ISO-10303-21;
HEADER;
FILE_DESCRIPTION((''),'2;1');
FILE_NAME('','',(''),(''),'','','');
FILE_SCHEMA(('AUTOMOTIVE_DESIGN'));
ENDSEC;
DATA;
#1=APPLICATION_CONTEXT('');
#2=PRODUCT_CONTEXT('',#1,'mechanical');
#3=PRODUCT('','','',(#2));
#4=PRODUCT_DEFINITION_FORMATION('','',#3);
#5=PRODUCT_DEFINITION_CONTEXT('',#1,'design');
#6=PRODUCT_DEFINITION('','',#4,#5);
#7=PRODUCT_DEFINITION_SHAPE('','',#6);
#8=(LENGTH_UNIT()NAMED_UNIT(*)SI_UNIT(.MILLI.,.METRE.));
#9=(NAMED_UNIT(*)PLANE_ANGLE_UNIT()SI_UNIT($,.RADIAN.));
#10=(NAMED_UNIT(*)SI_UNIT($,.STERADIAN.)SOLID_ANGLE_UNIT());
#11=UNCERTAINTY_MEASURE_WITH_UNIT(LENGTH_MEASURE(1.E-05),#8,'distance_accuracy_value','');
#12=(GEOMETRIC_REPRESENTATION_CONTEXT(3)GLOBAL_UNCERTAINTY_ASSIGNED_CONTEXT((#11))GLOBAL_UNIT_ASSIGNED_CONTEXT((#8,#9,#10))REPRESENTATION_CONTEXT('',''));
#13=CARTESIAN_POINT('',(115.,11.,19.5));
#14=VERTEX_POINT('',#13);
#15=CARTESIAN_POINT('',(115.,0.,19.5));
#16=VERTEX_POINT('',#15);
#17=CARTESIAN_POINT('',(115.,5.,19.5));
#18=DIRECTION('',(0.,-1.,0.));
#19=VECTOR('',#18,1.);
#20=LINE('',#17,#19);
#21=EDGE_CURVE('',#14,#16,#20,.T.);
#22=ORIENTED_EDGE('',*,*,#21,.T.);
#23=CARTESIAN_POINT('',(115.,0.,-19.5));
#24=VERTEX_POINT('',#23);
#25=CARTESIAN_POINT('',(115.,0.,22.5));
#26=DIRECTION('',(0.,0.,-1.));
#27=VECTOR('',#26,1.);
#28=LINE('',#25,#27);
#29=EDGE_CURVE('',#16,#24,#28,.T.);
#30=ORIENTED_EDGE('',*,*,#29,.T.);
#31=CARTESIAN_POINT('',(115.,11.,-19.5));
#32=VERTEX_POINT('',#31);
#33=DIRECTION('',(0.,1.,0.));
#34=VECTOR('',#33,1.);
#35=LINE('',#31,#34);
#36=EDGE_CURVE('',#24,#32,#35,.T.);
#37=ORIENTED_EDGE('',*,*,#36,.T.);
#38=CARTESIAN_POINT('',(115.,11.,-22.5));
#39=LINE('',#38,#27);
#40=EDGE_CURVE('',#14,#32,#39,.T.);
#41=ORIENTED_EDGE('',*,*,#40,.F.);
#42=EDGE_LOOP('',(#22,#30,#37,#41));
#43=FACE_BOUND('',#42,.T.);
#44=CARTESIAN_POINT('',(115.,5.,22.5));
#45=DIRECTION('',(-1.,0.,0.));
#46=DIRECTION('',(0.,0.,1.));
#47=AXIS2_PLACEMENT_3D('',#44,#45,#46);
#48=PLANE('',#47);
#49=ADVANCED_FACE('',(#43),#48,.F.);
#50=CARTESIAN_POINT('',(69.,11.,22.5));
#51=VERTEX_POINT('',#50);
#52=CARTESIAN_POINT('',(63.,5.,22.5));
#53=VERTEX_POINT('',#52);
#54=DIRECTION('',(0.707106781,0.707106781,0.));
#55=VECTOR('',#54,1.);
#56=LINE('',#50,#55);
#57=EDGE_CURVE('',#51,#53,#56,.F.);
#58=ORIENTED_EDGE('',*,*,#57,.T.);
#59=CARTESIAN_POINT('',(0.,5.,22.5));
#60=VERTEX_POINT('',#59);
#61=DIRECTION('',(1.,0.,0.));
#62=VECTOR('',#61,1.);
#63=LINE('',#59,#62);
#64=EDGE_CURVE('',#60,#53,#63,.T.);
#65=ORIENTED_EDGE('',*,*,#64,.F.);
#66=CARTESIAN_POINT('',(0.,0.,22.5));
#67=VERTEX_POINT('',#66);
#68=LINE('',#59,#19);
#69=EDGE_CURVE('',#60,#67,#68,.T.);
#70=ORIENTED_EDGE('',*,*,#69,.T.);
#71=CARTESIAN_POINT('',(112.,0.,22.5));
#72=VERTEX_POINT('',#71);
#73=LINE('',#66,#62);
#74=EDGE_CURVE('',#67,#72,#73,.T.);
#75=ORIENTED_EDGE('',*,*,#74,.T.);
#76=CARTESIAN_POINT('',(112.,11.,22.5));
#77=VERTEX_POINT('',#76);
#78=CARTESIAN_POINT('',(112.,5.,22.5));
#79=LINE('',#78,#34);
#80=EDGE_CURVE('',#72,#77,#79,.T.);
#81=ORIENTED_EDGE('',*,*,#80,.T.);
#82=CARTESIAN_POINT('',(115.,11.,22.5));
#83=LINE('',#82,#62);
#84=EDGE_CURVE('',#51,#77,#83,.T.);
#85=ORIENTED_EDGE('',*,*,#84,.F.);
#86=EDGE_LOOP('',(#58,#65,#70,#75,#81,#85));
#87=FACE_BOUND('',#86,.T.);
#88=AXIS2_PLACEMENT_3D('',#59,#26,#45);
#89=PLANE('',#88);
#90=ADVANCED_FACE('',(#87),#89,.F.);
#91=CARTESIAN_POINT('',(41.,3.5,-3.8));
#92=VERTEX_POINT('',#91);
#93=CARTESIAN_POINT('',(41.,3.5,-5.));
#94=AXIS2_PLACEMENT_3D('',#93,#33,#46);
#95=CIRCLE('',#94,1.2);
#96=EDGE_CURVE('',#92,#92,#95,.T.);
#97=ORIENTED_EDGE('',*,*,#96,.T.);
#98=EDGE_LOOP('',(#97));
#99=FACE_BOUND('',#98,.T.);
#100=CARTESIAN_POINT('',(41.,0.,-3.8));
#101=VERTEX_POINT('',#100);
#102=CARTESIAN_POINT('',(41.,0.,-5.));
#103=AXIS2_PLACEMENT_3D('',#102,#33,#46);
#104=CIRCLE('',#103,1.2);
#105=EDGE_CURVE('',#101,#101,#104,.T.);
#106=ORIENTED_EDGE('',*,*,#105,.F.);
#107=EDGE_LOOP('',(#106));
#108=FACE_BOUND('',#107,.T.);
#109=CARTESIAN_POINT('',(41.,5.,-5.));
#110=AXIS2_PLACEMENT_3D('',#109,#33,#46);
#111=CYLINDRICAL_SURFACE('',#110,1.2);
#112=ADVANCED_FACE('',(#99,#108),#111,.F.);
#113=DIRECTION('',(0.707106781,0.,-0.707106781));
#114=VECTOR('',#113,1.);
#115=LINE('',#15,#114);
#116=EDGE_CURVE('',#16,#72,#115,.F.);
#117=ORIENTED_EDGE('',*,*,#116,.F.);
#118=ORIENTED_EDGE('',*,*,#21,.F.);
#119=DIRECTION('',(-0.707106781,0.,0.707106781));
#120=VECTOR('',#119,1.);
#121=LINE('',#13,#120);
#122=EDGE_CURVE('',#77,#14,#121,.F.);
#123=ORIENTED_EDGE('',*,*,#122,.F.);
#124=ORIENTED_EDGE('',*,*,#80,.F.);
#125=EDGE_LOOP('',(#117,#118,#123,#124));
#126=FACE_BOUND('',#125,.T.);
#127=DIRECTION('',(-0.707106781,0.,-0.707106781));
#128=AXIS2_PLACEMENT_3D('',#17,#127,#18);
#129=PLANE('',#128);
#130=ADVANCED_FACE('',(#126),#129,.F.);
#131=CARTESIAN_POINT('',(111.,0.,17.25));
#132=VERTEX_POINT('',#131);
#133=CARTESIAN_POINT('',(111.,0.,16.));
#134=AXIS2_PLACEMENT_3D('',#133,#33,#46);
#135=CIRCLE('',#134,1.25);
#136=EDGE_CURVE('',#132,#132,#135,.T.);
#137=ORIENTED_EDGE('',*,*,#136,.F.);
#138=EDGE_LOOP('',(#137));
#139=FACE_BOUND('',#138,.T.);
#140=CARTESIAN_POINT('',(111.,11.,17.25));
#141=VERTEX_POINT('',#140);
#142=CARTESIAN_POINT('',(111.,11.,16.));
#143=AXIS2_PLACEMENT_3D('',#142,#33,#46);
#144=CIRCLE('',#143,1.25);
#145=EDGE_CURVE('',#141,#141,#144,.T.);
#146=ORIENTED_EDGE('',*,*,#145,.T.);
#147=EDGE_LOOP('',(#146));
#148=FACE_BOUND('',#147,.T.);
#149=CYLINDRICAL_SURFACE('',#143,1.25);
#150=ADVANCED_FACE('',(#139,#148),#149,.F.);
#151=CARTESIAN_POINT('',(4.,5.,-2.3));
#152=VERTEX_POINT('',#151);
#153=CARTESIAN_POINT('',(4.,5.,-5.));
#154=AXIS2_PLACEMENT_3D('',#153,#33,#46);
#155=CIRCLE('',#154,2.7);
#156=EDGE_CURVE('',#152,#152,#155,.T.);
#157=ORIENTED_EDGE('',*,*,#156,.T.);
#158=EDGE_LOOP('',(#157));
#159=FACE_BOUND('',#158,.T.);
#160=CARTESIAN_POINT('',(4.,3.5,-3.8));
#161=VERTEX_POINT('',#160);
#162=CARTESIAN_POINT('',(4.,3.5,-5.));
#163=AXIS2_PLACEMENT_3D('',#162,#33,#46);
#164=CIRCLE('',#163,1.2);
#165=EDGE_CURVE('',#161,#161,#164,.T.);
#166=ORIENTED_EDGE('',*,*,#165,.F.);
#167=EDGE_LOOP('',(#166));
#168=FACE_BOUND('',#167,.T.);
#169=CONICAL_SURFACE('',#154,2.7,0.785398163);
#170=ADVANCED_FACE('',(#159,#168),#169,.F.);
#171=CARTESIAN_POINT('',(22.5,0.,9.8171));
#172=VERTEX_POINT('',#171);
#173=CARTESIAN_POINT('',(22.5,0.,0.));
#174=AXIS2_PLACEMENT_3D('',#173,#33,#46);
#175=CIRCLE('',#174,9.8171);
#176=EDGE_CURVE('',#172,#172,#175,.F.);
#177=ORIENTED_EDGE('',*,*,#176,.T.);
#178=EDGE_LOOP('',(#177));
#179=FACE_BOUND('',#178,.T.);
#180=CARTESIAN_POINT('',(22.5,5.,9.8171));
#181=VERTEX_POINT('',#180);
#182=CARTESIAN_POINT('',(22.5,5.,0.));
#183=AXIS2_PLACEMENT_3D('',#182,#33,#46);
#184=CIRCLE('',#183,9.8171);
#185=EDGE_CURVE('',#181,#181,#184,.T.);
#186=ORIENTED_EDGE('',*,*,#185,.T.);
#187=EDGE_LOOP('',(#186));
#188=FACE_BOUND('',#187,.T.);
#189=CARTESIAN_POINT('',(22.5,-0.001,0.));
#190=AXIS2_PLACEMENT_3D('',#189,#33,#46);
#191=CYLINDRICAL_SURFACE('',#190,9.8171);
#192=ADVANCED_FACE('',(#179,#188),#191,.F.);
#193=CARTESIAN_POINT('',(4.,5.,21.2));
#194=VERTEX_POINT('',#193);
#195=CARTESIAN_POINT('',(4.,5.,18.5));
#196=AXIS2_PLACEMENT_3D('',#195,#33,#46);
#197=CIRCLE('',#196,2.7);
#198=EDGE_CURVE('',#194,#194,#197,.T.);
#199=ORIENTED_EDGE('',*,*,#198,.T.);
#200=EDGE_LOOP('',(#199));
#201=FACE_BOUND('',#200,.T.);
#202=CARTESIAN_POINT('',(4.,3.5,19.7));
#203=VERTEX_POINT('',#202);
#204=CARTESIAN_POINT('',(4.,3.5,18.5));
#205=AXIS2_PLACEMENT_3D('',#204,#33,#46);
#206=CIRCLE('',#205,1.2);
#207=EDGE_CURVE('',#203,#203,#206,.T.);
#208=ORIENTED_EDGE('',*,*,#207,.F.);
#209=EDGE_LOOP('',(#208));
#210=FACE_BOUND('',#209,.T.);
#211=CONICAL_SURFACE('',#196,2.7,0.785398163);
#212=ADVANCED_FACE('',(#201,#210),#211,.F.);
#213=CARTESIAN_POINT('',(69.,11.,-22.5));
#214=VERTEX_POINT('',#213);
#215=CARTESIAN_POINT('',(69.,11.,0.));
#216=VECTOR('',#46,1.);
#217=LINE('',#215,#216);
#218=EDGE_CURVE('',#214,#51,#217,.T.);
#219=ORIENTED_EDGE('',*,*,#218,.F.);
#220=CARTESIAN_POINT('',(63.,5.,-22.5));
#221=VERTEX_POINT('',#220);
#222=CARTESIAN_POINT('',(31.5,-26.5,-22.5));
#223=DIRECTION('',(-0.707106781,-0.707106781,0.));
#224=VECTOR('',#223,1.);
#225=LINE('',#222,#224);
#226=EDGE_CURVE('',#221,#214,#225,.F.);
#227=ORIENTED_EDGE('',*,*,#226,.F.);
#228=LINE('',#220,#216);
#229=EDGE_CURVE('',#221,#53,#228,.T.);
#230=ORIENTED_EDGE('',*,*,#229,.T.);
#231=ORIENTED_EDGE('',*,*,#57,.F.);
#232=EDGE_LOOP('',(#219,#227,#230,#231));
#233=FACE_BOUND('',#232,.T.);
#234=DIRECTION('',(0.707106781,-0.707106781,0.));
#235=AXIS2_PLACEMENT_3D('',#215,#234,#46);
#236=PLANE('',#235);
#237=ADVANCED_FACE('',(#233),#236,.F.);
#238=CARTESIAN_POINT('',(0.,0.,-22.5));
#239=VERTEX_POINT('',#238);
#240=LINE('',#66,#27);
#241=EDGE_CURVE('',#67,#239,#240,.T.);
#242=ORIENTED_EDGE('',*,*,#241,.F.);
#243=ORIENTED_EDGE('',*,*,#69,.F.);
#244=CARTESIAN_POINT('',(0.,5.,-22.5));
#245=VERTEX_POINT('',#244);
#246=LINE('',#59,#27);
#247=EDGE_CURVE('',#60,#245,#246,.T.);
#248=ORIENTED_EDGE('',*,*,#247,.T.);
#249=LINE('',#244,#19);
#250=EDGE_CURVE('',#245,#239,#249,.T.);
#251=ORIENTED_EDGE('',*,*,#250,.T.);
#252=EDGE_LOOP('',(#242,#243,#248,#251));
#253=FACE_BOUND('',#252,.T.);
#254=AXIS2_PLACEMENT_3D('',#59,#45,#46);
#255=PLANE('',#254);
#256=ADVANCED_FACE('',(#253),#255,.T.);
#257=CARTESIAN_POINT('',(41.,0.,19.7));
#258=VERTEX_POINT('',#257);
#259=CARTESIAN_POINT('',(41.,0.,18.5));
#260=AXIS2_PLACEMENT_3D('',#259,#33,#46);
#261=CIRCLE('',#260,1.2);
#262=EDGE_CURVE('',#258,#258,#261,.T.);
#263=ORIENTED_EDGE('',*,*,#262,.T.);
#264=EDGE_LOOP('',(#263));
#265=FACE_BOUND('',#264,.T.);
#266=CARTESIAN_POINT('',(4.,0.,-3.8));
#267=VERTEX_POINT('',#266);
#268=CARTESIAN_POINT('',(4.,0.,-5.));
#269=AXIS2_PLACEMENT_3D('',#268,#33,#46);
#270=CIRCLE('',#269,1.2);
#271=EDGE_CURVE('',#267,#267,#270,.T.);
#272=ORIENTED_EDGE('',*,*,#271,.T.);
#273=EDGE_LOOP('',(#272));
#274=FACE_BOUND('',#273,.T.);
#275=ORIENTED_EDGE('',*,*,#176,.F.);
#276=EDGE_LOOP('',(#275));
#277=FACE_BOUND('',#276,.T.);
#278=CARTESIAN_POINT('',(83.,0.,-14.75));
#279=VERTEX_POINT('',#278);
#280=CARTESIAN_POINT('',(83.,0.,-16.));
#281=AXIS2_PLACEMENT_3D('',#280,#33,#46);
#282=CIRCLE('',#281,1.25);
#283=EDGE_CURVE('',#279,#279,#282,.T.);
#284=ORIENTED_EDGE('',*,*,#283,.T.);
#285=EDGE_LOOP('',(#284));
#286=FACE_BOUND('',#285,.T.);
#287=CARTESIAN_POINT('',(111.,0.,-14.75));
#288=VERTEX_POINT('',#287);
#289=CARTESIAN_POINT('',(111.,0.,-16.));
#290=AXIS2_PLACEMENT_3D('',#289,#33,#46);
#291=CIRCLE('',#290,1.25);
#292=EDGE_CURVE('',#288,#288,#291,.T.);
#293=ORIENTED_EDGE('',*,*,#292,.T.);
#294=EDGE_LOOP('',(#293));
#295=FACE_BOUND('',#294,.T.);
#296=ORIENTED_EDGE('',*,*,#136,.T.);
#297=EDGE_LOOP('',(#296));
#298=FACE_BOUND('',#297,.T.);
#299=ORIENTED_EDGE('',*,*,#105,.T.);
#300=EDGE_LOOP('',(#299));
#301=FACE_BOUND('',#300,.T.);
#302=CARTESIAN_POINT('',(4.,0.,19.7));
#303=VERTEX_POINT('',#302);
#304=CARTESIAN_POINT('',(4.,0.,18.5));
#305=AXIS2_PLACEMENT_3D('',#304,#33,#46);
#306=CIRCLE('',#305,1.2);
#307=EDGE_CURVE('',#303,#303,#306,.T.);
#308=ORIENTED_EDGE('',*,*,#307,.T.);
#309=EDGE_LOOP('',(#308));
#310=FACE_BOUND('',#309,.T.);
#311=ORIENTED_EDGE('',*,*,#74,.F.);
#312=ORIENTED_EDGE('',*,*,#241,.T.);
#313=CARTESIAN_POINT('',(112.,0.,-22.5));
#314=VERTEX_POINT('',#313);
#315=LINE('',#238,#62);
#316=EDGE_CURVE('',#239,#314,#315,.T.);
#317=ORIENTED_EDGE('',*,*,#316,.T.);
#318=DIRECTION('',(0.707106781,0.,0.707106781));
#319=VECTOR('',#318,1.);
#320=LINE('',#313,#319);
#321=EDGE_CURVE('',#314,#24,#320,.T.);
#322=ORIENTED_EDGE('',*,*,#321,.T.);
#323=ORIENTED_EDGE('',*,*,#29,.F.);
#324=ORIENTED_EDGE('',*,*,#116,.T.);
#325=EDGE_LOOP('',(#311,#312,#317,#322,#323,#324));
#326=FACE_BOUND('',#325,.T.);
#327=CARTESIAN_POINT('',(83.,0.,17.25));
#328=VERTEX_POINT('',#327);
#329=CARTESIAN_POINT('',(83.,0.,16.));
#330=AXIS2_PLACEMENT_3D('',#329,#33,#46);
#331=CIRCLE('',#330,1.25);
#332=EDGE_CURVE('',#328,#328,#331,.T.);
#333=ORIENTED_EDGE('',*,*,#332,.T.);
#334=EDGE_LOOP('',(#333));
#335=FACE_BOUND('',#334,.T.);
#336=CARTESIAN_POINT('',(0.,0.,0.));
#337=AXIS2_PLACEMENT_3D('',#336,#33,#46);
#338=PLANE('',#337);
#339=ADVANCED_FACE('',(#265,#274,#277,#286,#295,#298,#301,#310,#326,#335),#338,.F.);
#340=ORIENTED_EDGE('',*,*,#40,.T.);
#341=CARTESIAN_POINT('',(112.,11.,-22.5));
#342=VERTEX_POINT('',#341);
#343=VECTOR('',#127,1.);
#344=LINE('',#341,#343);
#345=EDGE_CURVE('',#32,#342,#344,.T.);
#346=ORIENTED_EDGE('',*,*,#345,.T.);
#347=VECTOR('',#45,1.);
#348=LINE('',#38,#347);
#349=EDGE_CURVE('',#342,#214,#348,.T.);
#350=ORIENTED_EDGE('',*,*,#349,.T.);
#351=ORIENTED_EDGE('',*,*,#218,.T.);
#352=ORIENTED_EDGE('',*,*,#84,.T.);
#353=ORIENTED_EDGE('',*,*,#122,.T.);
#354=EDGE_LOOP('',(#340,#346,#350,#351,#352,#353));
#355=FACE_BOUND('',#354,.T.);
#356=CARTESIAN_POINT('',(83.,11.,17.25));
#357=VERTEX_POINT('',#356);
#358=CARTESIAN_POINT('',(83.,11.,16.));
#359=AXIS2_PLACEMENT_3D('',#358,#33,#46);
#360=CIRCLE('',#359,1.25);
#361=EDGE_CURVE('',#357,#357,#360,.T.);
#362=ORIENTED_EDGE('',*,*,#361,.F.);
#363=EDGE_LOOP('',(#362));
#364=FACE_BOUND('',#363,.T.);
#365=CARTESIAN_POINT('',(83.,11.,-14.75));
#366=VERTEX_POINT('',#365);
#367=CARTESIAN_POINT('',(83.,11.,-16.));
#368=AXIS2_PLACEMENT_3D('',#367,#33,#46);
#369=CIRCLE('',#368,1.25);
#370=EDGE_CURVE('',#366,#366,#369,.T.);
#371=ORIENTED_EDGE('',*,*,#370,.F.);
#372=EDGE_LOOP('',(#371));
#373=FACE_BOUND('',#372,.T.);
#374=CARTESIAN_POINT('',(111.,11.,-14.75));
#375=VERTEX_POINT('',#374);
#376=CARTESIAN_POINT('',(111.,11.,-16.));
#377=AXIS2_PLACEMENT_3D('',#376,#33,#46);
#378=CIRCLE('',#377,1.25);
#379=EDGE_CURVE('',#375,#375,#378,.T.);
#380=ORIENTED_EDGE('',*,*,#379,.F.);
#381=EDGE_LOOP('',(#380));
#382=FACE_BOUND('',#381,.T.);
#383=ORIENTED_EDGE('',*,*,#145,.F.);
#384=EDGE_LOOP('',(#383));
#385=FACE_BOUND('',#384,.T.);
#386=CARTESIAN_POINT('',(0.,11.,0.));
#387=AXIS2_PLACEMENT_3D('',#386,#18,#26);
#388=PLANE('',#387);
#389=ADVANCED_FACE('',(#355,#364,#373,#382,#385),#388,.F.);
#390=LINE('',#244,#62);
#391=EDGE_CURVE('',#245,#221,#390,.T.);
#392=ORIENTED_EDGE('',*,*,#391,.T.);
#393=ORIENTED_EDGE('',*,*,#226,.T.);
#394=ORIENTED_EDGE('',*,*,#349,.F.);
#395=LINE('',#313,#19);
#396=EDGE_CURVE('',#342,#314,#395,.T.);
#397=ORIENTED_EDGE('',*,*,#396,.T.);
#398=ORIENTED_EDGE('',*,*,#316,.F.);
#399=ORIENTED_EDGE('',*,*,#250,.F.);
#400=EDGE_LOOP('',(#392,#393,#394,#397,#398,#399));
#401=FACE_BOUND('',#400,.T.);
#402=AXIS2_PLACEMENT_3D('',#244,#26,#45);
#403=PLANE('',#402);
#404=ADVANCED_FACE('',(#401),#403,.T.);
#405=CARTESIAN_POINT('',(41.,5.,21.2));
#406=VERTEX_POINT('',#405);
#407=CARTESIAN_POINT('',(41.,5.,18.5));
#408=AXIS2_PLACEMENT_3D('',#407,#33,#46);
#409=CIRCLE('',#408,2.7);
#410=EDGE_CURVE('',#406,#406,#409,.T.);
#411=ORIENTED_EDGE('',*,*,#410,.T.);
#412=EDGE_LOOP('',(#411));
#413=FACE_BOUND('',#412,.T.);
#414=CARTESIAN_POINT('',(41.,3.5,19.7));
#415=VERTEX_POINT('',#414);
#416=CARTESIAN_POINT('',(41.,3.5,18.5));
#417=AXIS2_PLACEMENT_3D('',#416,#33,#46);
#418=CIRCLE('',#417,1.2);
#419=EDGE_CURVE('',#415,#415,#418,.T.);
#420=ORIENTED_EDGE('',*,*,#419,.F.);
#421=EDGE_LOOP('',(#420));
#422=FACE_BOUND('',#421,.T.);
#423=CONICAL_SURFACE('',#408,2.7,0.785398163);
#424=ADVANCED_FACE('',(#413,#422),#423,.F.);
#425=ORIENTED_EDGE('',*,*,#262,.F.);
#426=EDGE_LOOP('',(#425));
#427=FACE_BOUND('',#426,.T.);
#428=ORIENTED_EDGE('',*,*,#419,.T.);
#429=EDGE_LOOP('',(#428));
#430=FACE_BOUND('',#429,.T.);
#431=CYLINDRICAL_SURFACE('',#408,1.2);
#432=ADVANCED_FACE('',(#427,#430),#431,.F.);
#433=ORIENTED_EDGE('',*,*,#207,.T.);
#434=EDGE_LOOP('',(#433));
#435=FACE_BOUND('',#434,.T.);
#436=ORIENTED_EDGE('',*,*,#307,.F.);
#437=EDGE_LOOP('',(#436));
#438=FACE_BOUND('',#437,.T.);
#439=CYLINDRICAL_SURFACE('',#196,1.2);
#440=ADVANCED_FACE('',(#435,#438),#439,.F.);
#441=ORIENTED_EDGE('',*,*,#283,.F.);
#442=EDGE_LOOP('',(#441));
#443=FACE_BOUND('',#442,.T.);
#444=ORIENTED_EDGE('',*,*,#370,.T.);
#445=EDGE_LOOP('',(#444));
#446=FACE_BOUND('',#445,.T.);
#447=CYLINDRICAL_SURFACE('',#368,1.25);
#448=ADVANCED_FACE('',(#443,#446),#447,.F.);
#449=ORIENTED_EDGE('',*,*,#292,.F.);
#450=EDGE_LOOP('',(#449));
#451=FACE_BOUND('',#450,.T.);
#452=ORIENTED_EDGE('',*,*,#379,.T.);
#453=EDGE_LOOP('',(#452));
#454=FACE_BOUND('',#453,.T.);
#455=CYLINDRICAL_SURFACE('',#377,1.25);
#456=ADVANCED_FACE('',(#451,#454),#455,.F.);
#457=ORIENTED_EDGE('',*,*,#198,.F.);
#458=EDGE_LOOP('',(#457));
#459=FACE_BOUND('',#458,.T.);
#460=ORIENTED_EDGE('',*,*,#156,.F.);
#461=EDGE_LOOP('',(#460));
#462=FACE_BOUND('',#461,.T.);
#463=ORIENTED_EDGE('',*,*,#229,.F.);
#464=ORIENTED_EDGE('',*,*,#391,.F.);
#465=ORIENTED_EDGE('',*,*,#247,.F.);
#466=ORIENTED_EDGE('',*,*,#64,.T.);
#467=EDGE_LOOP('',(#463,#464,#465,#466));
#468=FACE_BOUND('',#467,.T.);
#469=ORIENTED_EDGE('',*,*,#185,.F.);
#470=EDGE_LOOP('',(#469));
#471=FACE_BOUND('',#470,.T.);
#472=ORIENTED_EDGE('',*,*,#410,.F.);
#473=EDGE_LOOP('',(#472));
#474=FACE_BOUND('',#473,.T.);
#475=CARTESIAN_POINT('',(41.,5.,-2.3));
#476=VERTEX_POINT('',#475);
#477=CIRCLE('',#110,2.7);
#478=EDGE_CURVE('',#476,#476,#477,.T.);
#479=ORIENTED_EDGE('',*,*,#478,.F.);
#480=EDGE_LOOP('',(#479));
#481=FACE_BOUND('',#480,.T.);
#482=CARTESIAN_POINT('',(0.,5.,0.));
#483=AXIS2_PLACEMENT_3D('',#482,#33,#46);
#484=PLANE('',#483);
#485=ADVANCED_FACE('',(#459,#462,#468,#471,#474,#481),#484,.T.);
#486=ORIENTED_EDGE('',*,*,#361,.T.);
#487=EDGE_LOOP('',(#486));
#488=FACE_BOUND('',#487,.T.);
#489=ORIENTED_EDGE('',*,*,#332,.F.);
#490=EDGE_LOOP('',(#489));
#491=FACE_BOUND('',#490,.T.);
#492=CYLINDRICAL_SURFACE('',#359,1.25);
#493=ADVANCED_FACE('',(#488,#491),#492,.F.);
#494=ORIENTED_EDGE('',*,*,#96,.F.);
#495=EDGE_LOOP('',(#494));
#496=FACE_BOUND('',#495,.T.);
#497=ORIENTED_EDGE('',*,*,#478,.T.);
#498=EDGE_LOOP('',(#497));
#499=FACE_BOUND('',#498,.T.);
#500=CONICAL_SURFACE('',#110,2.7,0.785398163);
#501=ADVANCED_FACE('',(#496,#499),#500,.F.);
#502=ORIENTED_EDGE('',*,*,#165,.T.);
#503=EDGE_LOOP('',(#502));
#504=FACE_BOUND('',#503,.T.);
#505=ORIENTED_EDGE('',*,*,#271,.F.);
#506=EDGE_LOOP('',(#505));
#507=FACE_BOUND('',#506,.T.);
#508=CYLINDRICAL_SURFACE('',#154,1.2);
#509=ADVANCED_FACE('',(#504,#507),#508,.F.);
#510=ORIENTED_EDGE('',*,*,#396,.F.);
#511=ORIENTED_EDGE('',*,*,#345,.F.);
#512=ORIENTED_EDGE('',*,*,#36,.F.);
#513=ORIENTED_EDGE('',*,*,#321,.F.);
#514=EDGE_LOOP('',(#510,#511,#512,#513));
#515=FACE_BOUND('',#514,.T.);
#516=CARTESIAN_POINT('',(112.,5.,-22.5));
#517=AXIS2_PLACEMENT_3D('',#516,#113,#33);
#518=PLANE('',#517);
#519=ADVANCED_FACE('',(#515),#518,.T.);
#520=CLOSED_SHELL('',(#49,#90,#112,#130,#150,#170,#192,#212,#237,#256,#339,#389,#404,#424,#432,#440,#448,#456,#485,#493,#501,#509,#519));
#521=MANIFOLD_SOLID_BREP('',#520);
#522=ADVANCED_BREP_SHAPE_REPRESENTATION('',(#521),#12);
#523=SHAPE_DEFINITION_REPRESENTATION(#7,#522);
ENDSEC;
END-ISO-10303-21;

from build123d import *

# Parameters (mm, degrees)
SKETCH1_W                                           = 115
SKETCH1_H                                           = 45
BOSS_EXTRUDE1_DEPTH                                 = 5
CUT_EXTRUDE1_REACH                                  = 119.287
SKETCH2_R                                           = 9.8171
CSK_FOR_M2_COUNTERSUNK_FLAT_HEAD_SCREW1_D           = 2.4
CSK_FOR_M2_COUNTERSUNK_FLAT_HEAD_SCREW1_CSINK_D     = 5.4
CSK_FOR_M2_COUNTERSUNK_FLAT_HEAD_SCREW1_CSINK_ANGLE = 90
SKETCH13_W                                          = 52
SKETCH13_H                                          = 45
BOSS_EXTRUDE4_DEPTH                                 = 6
CHAMFER2_SIZE                                       = 6
M3_TAPPED_HOLE1_D                                   = 2.5
CHAMFER1_SIZE                                       = 3


with BuildPart() as part:
    # Sketch1 → Boss-Extrude1 (new body)
    with BuildSketch(Plane(origin=(0, 0, 0), x_dir=(1, 0, 0), z_dir=(0, 1, 0))):
        with Locations((57.5, 0)):
            Rectangle(SKETCH1_W, SKETCH1_H)
    extrude(amount=BOSS_EXTRUDE1_DEPTH)

    # Sketch2 → Cut-Extrude1 (cut, up to next)
    with BuildSketch(Plane(origin=(0, 5, 0), x_dir=(1, 0, 0), z_dir=(0, 1, 0)), mode=Mode.PRIVATE) as cut_extrude1_sk1:
        with Locations(Location((22.5, 0, 0), (0, 0, 270))):
            Circle(SKETCH2_R)
    cut_extrude1_tool1 = extrude(cut_extrude1_sk1.sketch, amount=-CUT_EXTRUDE1_REACH, mode=Mode.PRIVATE) & part.part
    add(cut_extrude1_tool1.solids().sort_by_distance((22.5, 5, 0))[0], mode=Mode.SUBTRACT)

    # CSK for M2 Countersunk Flat Head Screw1 (through all)
    with Locations(Plane(origin=(0, 5, 0), x_dir=(1, 0, 0), z_dir=(0, 1, 0))):
        with Locations((4, -18.5), (41, -18.5), (41, 5), (4, 5)):
            CounterSinkHole(CSK_FOR_M2_COUNTERSUNK_FLAT_HEAD_SCREW1_D / 2, CSK_FOR_M2_COUNTERSUNK_FLAT_HEAD_SCREW1_CSINK_D / 2, counter_sink_angle=CSK_FOR_M2_COUNTERSUNK_FLAT_HEAD_SCREW1_CSINK_ANGLE)

    # Sketch13 → Boss-Extrude4 (add)
    with BuildSketch(Plane(origin=(0, 5, 0), x_dir=(1, 0, 0), z_dir=(0, 1, 0))):
        with Locations((89, 0)):
            Rectangle(SKETCH13_W, SKETCH13_H)
    extrude(amount=BOSS_EXTRUDE4_DEPTH)

    # Chamfer2
    chamfer2_edges = [part.edges().sort_by_distance(p)[0] for p in [
        (63, 11, 0),
    ]]
    chamfer(chamfer2_edges, length=CHAMFER2_SIZE - 0.0001)  # a hair under: the kernel refuses the full size

    # M3 Tapped Hole1 (through all)
    with Locations(Plane(origin=(0, 11, 0), x_dir=(1, 0, 0), z_dir=(0, 1, 0))):
        with Locations((83, 16), (111, 16), (83, -16), (111, -16)):
            Hole(M3_TAPPED_HOLE1_D / 2)

    # Chamfer1
    chamfer1_edges = [part.edges().sort_by_distance(p)[0] for p in [
        (115, 5.5, -22.5),
        (115, 5.5, 22.5),
    ]]
    chamfer(chamfer1_edges, length=CHAMFER1_SIZE)


solid = part.part
